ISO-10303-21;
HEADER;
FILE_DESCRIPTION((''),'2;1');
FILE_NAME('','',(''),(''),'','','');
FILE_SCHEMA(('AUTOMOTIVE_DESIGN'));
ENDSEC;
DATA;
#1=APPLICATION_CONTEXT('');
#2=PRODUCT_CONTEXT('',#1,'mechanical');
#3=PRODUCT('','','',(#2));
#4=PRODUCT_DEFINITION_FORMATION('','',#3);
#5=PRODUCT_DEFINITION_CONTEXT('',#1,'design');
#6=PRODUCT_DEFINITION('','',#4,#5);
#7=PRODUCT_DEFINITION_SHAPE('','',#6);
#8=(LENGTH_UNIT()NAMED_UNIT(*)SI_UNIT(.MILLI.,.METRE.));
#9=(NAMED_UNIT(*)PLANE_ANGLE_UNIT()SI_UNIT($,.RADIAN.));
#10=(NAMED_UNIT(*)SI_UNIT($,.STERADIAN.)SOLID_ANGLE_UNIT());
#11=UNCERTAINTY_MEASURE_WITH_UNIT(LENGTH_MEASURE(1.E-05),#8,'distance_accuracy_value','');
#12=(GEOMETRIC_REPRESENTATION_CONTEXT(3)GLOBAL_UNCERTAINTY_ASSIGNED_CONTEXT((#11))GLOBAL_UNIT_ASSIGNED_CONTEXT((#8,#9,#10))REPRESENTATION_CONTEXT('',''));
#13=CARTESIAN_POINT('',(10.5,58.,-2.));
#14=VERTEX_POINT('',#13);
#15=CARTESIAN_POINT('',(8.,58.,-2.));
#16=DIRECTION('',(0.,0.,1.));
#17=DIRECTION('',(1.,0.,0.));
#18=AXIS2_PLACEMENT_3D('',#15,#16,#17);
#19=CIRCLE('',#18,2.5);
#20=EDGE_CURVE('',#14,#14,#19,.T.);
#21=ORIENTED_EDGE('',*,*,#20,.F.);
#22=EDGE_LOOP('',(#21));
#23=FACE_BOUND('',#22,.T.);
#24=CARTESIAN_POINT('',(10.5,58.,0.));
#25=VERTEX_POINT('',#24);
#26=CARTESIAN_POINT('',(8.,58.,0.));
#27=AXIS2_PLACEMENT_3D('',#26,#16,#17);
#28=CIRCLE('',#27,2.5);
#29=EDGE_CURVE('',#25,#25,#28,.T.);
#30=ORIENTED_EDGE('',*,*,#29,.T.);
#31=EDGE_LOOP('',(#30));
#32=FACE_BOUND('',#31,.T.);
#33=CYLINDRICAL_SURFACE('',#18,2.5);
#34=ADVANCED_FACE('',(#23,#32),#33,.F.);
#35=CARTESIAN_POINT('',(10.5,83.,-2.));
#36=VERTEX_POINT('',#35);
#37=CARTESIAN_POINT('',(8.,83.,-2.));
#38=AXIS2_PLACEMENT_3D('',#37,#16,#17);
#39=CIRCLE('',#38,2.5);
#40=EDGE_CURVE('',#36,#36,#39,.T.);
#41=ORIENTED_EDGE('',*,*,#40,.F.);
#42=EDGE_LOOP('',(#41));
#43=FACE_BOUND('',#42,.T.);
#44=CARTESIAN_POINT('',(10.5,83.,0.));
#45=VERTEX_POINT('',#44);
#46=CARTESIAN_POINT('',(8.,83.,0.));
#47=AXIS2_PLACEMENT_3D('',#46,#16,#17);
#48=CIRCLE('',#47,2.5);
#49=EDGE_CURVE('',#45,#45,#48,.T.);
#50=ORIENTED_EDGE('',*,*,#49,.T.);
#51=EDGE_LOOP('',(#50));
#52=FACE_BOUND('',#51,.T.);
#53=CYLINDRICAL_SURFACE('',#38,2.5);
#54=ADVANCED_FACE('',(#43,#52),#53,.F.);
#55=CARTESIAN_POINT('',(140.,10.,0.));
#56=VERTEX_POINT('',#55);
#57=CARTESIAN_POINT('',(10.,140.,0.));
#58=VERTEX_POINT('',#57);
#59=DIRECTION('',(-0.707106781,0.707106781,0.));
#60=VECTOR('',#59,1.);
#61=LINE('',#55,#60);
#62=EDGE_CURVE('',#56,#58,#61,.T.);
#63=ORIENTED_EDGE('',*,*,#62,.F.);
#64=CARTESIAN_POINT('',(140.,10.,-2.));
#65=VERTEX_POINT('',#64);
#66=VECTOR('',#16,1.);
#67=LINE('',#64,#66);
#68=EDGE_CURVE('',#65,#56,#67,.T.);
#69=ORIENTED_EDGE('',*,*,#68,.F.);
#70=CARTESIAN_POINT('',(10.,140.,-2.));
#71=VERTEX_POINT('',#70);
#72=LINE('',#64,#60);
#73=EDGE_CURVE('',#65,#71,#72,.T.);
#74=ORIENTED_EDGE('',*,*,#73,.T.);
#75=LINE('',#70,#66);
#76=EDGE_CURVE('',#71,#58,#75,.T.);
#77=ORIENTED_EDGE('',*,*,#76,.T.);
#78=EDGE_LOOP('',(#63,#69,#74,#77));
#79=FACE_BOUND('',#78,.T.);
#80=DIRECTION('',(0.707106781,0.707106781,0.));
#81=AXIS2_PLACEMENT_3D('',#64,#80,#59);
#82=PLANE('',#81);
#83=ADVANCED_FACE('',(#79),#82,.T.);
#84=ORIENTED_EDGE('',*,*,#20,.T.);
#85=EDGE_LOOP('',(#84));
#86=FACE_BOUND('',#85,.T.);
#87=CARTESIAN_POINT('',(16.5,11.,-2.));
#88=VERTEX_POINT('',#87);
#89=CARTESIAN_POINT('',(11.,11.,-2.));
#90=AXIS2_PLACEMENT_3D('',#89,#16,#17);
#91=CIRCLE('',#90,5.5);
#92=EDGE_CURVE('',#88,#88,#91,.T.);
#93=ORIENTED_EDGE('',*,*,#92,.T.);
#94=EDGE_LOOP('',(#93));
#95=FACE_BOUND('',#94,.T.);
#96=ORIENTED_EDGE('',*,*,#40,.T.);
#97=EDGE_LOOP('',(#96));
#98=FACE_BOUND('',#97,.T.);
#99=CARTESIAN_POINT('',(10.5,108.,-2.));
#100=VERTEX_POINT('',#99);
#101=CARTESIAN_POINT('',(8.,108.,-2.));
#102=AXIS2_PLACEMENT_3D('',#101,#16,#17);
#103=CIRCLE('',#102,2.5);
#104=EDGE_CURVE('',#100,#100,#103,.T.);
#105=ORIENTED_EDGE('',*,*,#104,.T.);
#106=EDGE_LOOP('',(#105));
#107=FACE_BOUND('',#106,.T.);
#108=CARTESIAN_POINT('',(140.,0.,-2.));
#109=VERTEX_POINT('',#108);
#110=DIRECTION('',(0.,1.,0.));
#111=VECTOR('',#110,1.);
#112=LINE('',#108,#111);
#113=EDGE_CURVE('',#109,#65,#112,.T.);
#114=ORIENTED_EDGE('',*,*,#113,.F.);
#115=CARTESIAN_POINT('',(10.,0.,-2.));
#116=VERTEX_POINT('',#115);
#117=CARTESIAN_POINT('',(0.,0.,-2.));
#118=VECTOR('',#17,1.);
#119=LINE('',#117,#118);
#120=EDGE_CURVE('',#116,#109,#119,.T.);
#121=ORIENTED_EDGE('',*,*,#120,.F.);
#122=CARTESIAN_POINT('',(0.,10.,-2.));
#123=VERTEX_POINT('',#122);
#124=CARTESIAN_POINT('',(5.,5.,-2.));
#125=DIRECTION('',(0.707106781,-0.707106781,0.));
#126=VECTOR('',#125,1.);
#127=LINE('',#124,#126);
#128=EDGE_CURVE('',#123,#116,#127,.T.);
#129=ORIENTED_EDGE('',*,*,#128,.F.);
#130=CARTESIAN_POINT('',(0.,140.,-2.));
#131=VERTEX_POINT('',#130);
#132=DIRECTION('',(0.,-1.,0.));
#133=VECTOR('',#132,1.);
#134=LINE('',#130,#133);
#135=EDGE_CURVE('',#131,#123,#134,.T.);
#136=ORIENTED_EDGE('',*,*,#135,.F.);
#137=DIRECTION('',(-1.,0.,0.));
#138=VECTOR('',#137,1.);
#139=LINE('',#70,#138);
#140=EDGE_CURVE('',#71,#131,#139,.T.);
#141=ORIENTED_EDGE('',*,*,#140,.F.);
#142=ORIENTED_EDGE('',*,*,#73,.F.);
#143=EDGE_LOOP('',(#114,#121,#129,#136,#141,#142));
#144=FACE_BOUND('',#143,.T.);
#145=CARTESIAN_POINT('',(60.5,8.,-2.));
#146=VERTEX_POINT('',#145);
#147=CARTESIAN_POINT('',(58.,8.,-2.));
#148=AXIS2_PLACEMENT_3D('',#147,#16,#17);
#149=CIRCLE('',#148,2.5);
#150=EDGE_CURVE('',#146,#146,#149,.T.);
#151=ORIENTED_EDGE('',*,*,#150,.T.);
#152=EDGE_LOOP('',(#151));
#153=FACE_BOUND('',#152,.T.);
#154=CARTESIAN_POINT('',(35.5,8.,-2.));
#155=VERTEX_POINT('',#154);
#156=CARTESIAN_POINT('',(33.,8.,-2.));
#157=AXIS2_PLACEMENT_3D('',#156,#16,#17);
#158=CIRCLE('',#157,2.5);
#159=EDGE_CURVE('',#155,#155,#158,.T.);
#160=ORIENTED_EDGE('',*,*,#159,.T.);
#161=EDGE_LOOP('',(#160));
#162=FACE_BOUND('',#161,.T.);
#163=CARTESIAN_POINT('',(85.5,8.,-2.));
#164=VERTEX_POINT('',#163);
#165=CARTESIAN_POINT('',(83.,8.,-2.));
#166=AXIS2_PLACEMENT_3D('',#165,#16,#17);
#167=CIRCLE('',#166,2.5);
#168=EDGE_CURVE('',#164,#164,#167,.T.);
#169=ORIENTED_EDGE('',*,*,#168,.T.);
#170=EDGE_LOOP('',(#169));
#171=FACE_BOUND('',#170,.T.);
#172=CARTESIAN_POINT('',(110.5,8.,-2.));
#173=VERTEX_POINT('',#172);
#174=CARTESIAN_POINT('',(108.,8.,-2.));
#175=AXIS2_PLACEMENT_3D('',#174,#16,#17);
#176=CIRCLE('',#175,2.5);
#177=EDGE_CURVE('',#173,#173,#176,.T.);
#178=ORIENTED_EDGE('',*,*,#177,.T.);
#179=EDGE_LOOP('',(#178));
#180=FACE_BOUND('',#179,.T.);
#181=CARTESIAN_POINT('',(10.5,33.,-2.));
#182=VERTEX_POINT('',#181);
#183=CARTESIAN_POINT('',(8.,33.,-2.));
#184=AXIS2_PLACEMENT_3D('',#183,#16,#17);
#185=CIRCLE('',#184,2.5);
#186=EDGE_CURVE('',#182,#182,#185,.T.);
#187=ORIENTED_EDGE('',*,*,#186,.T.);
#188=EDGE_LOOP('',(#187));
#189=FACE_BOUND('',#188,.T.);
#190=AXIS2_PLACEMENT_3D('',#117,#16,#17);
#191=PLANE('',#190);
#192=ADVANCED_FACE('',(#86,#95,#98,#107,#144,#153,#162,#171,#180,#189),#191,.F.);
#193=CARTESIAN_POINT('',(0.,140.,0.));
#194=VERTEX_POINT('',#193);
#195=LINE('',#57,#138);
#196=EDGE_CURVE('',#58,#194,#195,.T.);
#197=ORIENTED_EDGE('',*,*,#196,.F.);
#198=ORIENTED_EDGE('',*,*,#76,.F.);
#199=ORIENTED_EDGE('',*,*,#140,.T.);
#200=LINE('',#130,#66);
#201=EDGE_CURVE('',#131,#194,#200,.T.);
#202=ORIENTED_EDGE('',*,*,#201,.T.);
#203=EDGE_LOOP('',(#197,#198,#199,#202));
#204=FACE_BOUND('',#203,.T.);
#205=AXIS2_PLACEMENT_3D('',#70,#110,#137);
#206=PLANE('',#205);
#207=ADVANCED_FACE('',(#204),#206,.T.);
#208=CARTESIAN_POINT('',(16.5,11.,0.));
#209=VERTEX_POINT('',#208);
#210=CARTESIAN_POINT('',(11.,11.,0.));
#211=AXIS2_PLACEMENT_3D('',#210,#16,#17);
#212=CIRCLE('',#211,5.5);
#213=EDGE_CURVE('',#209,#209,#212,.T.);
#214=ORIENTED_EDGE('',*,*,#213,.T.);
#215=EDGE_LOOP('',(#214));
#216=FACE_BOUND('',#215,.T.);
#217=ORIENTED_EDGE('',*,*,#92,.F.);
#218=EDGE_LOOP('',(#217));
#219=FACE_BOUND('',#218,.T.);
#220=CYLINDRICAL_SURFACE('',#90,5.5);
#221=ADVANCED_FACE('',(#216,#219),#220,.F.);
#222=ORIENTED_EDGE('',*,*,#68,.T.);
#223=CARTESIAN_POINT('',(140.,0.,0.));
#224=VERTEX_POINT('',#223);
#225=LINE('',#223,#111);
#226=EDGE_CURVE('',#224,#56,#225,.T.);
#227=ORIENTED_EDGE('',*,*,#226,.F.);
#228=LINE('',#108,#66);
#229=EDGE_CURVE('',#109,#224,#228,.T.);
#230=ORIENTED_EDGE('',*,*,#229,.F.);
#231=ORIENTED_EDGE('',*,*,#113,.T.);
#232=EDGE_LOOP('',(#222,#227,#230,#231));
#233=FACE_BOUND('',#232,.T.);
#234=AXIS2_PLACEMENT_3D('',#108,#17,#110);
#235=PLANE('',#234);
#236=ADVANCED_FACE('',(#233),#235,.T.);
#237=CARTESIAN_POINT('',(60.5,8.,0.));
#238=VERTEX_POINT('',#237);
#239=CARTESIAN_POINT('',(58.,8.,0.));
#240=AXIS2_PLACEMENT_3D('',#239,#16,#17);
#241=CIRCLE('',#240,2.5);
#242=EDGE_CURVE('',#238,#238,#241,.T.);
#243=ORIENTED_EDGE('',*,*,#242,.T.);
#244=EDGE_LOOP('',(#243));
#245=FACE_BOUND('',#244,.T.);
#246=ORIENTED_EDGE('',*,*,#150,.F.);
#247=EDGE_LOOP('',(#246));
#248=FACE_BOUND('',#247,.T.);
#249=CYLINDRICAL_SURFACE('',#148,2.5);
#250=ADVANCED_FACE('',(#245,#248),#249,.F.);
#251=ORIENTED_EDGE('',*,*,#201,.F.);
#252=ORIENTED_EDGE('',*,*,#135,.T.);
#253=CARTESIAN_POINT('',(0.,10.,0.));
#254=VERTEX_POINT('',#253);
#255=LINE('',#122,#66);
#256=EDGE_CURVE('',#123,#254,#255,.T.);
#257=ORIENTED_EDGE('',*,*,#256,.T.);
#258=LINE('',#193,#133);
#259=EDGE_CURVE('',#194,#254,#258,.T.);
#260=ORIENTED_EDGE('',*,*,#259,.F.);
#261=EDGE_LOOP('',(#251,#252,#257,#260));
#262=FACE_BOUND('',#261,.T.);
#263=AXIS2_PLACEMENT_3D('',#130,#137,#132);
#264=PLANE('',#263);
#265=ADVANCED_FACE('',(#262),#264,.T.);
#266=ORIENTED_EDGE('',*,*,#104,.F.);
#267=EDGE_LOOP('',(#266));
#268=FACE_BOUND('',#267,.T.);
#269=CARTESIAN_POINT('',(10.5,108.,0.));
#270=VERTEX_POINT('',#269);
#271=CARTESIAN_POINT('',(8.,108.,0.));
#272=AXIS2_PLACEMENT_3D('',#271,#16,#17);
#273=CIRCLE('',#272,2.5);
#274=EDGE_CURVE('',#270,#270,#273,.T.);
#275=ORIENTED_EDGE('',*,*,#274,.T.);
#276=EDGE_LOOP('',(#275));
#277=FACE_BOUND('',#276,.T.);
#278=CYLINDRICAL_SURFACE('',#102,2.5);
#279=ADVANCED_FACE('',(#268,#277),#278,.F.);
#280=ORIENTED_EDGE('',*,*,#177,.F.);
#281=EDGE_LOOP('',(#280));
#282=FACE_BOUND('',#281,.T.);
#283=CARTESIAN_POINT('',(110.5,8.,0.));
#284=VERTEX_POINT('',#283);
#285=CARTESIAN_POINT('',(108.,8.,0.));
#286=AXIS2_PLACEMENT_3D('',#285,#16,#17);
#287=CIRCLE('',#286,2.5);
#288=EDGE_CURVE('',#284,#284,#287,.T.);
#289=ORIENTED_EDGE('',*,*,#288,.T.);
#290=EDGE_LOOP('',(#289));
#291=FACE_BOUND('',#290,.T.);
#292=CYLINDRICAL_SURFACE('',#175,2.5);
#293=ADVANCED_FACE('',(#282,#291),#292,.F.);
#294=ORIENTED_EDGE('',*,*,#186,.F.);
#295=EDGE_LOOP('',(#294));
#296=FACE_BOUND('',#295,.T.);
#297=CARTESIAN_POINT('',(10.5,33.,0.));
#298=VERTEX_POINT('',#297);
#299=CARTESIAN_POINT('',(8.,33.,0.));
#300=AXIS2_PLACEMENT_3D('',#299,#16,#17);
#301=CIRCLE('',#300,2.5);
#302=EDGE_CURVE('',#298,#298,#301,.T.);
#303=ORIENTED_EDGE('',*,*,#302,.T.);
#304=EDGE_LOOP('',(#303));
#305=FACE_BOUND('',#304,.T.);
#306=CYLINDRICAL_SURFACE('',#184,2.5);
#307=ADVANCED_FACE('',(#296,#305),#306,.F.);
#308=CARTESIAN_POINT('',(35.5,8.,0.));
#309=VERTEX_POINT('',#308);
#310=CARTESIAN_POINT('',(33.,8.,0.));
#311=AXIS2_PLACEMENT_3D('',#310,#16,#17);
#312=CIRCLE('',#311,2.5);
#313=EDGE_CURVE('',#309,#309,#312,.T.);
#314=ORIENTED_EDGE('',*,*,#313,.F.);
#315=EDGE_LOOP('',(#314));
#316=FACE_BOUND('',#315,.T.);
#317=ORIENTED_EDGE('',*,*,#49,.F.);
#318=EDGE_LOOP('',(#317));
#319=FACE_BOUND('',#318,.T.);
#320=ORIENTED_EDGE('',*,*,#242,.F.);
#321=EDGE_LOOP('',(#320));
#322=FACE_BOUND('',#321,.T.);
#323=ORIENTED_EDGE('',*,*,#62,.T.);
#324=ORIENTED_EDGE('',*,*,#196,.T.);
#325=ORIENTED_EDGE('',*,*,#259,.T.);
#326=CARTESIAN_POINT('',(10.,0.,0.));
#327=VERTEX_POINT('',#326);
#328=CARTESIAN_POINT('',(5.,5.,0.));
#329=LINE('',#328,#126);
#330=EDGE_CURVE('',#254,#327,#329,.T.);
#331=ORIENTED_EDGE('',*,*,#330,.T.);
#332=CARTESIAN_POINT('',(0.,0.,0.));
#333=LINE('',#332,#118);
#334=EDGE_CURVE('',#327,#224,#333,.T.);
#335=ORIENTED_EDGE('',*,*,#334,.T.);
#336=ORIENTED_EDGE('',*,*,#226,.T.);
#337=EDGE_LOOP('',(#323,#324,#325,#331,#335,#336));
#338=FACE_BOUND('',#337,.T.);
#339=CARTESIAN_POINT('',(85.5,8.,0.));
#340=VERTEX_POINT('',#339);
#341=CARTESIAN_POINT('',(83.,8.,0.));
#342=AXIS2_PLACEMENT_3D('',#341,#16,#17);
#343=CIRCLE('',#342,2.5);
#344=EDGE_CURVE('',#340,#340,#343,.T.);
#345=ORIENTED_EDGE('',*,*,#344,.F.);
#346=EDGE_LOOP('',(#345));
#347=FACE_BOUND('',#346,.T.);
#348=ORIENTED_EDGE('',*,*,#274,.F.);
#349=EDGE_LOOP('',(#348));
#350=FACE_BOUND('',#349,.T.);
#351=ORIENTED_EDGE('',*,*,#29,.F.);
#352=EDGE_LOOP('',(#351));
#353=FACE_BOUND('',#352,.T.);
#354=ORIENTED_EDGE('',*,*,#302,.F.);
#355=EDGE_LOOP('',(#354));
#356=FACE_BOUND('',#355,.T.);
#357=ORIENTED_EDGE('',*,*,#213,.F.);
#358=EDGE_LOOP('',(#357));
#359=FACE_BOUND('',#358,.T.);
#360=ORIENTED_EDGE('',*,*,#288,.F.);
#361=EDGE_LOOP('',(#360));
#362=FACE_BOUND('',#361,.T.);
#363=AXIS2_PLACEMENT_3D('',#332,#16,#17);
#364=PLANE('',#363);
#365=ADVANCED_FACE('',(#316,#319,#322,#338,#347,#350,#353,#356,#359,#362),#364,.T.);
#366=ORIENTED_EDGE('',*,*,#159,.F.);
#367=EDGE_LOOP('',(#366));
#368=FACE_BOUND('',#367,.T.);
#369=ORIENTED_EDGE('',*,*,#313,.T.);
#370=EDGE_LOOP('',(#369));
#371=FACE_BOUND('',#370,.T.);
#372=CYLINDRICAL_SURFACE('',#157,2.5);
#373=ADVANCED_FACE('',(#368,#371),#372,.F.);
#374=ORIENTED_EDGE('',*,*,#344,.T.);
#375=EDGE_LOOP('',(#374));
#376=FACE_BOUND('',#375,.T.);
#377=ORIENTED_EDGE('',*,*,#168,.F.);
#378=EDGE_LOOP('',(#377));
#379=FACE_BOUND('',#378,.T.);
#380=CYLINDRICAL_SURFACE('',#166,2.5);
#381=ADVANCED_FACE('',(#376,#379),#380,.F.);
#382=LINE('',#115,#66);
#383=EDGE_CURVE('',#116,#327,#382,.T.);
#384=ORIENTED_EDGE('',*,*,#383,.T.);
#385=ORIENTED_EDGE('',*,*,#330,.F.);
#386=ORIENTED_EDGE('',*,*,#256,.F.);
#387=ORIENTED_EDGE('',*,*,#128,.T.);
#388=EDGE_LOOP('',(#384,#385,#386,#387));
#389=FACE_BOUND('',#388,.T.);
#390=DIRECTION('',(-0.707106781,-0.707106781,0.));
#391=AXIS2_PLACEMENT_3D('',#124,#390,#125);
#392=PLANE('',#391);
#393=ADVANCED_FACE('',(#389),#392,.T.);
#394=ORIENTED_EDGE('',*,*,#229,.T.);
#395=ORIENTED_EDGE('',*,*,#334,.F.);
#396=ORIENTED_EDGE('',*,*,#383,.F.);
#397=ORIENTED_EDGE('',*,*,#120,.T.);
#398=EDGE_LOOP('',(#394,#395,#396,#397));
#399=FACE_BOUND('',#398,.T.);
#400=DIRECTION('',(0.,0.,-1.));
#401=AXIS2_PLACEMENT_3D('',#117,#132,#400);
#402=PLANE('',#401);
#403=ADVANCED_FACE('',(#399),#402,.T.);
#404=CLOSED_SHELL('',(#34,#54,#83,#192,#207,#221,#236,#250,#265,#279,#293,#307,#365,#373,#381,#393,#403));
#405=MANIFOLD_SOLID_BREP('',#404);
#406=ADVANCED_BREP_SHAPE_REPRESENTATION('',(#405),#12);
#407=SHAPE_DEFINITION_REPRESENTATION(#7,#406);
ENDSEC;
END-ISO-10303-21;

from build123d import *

# Parameters (mm, degrees)
SM_BASE_FLANGE_1_DEPTH = 2
SKETCH_7_R             = 5.5
SKETCH_7_R_2           = 2.5
CUT_EXTRUDE_1_DEPTH    = 10


# Sheet-metal steps are written as plain solids
with BuildPart() as part:
    # Sketch 1 → Базовая кромка1 (new body)
    with BuildSketch(Plane.XY):
        Polygon((0, 0), (140, 0), (140, 10), (10, 140), (0, 140), align=None)
    extrude(amount=-SM_BASE_FLANGE_1_DEPTH)

    # Эскиз7 → Вырез-Вытянуть1 (cut)
    with BuildSketch(Plane.XY):
        Polygon((10, 0), (0, 10), (0, 0), align=None)
        with Locations((11, 11)):
            Circle(SKETCH_7_R)
        with Locations((8, 33)):
            Circle(SKETCH_7_R_2)
        with Locations((33, 8)):
            Circle(SKETCH_7_R_2)
        with Locations((58, 8)):
            Circle(SKETCH_7_R_2)
        with Locations((83, 8)):
            Circle(SKETCH_7_R_2)
        with Locations((8, 58)):
            Circle(SKETCH_7_R_2)
        with Locations((8, 108)):
            Circle(SKETCH_7_R_2)
        with Locations((8, 83)):
            Circle(SKETCH_7_R_2)
        with Locations((108, 8)):
            Circle(SKETCH_7_R_2)
    extrude(amount=-CUT_EXTRUDE_1_DEPTH, mode=Mode.SUBTRACT)


solid = part.part
